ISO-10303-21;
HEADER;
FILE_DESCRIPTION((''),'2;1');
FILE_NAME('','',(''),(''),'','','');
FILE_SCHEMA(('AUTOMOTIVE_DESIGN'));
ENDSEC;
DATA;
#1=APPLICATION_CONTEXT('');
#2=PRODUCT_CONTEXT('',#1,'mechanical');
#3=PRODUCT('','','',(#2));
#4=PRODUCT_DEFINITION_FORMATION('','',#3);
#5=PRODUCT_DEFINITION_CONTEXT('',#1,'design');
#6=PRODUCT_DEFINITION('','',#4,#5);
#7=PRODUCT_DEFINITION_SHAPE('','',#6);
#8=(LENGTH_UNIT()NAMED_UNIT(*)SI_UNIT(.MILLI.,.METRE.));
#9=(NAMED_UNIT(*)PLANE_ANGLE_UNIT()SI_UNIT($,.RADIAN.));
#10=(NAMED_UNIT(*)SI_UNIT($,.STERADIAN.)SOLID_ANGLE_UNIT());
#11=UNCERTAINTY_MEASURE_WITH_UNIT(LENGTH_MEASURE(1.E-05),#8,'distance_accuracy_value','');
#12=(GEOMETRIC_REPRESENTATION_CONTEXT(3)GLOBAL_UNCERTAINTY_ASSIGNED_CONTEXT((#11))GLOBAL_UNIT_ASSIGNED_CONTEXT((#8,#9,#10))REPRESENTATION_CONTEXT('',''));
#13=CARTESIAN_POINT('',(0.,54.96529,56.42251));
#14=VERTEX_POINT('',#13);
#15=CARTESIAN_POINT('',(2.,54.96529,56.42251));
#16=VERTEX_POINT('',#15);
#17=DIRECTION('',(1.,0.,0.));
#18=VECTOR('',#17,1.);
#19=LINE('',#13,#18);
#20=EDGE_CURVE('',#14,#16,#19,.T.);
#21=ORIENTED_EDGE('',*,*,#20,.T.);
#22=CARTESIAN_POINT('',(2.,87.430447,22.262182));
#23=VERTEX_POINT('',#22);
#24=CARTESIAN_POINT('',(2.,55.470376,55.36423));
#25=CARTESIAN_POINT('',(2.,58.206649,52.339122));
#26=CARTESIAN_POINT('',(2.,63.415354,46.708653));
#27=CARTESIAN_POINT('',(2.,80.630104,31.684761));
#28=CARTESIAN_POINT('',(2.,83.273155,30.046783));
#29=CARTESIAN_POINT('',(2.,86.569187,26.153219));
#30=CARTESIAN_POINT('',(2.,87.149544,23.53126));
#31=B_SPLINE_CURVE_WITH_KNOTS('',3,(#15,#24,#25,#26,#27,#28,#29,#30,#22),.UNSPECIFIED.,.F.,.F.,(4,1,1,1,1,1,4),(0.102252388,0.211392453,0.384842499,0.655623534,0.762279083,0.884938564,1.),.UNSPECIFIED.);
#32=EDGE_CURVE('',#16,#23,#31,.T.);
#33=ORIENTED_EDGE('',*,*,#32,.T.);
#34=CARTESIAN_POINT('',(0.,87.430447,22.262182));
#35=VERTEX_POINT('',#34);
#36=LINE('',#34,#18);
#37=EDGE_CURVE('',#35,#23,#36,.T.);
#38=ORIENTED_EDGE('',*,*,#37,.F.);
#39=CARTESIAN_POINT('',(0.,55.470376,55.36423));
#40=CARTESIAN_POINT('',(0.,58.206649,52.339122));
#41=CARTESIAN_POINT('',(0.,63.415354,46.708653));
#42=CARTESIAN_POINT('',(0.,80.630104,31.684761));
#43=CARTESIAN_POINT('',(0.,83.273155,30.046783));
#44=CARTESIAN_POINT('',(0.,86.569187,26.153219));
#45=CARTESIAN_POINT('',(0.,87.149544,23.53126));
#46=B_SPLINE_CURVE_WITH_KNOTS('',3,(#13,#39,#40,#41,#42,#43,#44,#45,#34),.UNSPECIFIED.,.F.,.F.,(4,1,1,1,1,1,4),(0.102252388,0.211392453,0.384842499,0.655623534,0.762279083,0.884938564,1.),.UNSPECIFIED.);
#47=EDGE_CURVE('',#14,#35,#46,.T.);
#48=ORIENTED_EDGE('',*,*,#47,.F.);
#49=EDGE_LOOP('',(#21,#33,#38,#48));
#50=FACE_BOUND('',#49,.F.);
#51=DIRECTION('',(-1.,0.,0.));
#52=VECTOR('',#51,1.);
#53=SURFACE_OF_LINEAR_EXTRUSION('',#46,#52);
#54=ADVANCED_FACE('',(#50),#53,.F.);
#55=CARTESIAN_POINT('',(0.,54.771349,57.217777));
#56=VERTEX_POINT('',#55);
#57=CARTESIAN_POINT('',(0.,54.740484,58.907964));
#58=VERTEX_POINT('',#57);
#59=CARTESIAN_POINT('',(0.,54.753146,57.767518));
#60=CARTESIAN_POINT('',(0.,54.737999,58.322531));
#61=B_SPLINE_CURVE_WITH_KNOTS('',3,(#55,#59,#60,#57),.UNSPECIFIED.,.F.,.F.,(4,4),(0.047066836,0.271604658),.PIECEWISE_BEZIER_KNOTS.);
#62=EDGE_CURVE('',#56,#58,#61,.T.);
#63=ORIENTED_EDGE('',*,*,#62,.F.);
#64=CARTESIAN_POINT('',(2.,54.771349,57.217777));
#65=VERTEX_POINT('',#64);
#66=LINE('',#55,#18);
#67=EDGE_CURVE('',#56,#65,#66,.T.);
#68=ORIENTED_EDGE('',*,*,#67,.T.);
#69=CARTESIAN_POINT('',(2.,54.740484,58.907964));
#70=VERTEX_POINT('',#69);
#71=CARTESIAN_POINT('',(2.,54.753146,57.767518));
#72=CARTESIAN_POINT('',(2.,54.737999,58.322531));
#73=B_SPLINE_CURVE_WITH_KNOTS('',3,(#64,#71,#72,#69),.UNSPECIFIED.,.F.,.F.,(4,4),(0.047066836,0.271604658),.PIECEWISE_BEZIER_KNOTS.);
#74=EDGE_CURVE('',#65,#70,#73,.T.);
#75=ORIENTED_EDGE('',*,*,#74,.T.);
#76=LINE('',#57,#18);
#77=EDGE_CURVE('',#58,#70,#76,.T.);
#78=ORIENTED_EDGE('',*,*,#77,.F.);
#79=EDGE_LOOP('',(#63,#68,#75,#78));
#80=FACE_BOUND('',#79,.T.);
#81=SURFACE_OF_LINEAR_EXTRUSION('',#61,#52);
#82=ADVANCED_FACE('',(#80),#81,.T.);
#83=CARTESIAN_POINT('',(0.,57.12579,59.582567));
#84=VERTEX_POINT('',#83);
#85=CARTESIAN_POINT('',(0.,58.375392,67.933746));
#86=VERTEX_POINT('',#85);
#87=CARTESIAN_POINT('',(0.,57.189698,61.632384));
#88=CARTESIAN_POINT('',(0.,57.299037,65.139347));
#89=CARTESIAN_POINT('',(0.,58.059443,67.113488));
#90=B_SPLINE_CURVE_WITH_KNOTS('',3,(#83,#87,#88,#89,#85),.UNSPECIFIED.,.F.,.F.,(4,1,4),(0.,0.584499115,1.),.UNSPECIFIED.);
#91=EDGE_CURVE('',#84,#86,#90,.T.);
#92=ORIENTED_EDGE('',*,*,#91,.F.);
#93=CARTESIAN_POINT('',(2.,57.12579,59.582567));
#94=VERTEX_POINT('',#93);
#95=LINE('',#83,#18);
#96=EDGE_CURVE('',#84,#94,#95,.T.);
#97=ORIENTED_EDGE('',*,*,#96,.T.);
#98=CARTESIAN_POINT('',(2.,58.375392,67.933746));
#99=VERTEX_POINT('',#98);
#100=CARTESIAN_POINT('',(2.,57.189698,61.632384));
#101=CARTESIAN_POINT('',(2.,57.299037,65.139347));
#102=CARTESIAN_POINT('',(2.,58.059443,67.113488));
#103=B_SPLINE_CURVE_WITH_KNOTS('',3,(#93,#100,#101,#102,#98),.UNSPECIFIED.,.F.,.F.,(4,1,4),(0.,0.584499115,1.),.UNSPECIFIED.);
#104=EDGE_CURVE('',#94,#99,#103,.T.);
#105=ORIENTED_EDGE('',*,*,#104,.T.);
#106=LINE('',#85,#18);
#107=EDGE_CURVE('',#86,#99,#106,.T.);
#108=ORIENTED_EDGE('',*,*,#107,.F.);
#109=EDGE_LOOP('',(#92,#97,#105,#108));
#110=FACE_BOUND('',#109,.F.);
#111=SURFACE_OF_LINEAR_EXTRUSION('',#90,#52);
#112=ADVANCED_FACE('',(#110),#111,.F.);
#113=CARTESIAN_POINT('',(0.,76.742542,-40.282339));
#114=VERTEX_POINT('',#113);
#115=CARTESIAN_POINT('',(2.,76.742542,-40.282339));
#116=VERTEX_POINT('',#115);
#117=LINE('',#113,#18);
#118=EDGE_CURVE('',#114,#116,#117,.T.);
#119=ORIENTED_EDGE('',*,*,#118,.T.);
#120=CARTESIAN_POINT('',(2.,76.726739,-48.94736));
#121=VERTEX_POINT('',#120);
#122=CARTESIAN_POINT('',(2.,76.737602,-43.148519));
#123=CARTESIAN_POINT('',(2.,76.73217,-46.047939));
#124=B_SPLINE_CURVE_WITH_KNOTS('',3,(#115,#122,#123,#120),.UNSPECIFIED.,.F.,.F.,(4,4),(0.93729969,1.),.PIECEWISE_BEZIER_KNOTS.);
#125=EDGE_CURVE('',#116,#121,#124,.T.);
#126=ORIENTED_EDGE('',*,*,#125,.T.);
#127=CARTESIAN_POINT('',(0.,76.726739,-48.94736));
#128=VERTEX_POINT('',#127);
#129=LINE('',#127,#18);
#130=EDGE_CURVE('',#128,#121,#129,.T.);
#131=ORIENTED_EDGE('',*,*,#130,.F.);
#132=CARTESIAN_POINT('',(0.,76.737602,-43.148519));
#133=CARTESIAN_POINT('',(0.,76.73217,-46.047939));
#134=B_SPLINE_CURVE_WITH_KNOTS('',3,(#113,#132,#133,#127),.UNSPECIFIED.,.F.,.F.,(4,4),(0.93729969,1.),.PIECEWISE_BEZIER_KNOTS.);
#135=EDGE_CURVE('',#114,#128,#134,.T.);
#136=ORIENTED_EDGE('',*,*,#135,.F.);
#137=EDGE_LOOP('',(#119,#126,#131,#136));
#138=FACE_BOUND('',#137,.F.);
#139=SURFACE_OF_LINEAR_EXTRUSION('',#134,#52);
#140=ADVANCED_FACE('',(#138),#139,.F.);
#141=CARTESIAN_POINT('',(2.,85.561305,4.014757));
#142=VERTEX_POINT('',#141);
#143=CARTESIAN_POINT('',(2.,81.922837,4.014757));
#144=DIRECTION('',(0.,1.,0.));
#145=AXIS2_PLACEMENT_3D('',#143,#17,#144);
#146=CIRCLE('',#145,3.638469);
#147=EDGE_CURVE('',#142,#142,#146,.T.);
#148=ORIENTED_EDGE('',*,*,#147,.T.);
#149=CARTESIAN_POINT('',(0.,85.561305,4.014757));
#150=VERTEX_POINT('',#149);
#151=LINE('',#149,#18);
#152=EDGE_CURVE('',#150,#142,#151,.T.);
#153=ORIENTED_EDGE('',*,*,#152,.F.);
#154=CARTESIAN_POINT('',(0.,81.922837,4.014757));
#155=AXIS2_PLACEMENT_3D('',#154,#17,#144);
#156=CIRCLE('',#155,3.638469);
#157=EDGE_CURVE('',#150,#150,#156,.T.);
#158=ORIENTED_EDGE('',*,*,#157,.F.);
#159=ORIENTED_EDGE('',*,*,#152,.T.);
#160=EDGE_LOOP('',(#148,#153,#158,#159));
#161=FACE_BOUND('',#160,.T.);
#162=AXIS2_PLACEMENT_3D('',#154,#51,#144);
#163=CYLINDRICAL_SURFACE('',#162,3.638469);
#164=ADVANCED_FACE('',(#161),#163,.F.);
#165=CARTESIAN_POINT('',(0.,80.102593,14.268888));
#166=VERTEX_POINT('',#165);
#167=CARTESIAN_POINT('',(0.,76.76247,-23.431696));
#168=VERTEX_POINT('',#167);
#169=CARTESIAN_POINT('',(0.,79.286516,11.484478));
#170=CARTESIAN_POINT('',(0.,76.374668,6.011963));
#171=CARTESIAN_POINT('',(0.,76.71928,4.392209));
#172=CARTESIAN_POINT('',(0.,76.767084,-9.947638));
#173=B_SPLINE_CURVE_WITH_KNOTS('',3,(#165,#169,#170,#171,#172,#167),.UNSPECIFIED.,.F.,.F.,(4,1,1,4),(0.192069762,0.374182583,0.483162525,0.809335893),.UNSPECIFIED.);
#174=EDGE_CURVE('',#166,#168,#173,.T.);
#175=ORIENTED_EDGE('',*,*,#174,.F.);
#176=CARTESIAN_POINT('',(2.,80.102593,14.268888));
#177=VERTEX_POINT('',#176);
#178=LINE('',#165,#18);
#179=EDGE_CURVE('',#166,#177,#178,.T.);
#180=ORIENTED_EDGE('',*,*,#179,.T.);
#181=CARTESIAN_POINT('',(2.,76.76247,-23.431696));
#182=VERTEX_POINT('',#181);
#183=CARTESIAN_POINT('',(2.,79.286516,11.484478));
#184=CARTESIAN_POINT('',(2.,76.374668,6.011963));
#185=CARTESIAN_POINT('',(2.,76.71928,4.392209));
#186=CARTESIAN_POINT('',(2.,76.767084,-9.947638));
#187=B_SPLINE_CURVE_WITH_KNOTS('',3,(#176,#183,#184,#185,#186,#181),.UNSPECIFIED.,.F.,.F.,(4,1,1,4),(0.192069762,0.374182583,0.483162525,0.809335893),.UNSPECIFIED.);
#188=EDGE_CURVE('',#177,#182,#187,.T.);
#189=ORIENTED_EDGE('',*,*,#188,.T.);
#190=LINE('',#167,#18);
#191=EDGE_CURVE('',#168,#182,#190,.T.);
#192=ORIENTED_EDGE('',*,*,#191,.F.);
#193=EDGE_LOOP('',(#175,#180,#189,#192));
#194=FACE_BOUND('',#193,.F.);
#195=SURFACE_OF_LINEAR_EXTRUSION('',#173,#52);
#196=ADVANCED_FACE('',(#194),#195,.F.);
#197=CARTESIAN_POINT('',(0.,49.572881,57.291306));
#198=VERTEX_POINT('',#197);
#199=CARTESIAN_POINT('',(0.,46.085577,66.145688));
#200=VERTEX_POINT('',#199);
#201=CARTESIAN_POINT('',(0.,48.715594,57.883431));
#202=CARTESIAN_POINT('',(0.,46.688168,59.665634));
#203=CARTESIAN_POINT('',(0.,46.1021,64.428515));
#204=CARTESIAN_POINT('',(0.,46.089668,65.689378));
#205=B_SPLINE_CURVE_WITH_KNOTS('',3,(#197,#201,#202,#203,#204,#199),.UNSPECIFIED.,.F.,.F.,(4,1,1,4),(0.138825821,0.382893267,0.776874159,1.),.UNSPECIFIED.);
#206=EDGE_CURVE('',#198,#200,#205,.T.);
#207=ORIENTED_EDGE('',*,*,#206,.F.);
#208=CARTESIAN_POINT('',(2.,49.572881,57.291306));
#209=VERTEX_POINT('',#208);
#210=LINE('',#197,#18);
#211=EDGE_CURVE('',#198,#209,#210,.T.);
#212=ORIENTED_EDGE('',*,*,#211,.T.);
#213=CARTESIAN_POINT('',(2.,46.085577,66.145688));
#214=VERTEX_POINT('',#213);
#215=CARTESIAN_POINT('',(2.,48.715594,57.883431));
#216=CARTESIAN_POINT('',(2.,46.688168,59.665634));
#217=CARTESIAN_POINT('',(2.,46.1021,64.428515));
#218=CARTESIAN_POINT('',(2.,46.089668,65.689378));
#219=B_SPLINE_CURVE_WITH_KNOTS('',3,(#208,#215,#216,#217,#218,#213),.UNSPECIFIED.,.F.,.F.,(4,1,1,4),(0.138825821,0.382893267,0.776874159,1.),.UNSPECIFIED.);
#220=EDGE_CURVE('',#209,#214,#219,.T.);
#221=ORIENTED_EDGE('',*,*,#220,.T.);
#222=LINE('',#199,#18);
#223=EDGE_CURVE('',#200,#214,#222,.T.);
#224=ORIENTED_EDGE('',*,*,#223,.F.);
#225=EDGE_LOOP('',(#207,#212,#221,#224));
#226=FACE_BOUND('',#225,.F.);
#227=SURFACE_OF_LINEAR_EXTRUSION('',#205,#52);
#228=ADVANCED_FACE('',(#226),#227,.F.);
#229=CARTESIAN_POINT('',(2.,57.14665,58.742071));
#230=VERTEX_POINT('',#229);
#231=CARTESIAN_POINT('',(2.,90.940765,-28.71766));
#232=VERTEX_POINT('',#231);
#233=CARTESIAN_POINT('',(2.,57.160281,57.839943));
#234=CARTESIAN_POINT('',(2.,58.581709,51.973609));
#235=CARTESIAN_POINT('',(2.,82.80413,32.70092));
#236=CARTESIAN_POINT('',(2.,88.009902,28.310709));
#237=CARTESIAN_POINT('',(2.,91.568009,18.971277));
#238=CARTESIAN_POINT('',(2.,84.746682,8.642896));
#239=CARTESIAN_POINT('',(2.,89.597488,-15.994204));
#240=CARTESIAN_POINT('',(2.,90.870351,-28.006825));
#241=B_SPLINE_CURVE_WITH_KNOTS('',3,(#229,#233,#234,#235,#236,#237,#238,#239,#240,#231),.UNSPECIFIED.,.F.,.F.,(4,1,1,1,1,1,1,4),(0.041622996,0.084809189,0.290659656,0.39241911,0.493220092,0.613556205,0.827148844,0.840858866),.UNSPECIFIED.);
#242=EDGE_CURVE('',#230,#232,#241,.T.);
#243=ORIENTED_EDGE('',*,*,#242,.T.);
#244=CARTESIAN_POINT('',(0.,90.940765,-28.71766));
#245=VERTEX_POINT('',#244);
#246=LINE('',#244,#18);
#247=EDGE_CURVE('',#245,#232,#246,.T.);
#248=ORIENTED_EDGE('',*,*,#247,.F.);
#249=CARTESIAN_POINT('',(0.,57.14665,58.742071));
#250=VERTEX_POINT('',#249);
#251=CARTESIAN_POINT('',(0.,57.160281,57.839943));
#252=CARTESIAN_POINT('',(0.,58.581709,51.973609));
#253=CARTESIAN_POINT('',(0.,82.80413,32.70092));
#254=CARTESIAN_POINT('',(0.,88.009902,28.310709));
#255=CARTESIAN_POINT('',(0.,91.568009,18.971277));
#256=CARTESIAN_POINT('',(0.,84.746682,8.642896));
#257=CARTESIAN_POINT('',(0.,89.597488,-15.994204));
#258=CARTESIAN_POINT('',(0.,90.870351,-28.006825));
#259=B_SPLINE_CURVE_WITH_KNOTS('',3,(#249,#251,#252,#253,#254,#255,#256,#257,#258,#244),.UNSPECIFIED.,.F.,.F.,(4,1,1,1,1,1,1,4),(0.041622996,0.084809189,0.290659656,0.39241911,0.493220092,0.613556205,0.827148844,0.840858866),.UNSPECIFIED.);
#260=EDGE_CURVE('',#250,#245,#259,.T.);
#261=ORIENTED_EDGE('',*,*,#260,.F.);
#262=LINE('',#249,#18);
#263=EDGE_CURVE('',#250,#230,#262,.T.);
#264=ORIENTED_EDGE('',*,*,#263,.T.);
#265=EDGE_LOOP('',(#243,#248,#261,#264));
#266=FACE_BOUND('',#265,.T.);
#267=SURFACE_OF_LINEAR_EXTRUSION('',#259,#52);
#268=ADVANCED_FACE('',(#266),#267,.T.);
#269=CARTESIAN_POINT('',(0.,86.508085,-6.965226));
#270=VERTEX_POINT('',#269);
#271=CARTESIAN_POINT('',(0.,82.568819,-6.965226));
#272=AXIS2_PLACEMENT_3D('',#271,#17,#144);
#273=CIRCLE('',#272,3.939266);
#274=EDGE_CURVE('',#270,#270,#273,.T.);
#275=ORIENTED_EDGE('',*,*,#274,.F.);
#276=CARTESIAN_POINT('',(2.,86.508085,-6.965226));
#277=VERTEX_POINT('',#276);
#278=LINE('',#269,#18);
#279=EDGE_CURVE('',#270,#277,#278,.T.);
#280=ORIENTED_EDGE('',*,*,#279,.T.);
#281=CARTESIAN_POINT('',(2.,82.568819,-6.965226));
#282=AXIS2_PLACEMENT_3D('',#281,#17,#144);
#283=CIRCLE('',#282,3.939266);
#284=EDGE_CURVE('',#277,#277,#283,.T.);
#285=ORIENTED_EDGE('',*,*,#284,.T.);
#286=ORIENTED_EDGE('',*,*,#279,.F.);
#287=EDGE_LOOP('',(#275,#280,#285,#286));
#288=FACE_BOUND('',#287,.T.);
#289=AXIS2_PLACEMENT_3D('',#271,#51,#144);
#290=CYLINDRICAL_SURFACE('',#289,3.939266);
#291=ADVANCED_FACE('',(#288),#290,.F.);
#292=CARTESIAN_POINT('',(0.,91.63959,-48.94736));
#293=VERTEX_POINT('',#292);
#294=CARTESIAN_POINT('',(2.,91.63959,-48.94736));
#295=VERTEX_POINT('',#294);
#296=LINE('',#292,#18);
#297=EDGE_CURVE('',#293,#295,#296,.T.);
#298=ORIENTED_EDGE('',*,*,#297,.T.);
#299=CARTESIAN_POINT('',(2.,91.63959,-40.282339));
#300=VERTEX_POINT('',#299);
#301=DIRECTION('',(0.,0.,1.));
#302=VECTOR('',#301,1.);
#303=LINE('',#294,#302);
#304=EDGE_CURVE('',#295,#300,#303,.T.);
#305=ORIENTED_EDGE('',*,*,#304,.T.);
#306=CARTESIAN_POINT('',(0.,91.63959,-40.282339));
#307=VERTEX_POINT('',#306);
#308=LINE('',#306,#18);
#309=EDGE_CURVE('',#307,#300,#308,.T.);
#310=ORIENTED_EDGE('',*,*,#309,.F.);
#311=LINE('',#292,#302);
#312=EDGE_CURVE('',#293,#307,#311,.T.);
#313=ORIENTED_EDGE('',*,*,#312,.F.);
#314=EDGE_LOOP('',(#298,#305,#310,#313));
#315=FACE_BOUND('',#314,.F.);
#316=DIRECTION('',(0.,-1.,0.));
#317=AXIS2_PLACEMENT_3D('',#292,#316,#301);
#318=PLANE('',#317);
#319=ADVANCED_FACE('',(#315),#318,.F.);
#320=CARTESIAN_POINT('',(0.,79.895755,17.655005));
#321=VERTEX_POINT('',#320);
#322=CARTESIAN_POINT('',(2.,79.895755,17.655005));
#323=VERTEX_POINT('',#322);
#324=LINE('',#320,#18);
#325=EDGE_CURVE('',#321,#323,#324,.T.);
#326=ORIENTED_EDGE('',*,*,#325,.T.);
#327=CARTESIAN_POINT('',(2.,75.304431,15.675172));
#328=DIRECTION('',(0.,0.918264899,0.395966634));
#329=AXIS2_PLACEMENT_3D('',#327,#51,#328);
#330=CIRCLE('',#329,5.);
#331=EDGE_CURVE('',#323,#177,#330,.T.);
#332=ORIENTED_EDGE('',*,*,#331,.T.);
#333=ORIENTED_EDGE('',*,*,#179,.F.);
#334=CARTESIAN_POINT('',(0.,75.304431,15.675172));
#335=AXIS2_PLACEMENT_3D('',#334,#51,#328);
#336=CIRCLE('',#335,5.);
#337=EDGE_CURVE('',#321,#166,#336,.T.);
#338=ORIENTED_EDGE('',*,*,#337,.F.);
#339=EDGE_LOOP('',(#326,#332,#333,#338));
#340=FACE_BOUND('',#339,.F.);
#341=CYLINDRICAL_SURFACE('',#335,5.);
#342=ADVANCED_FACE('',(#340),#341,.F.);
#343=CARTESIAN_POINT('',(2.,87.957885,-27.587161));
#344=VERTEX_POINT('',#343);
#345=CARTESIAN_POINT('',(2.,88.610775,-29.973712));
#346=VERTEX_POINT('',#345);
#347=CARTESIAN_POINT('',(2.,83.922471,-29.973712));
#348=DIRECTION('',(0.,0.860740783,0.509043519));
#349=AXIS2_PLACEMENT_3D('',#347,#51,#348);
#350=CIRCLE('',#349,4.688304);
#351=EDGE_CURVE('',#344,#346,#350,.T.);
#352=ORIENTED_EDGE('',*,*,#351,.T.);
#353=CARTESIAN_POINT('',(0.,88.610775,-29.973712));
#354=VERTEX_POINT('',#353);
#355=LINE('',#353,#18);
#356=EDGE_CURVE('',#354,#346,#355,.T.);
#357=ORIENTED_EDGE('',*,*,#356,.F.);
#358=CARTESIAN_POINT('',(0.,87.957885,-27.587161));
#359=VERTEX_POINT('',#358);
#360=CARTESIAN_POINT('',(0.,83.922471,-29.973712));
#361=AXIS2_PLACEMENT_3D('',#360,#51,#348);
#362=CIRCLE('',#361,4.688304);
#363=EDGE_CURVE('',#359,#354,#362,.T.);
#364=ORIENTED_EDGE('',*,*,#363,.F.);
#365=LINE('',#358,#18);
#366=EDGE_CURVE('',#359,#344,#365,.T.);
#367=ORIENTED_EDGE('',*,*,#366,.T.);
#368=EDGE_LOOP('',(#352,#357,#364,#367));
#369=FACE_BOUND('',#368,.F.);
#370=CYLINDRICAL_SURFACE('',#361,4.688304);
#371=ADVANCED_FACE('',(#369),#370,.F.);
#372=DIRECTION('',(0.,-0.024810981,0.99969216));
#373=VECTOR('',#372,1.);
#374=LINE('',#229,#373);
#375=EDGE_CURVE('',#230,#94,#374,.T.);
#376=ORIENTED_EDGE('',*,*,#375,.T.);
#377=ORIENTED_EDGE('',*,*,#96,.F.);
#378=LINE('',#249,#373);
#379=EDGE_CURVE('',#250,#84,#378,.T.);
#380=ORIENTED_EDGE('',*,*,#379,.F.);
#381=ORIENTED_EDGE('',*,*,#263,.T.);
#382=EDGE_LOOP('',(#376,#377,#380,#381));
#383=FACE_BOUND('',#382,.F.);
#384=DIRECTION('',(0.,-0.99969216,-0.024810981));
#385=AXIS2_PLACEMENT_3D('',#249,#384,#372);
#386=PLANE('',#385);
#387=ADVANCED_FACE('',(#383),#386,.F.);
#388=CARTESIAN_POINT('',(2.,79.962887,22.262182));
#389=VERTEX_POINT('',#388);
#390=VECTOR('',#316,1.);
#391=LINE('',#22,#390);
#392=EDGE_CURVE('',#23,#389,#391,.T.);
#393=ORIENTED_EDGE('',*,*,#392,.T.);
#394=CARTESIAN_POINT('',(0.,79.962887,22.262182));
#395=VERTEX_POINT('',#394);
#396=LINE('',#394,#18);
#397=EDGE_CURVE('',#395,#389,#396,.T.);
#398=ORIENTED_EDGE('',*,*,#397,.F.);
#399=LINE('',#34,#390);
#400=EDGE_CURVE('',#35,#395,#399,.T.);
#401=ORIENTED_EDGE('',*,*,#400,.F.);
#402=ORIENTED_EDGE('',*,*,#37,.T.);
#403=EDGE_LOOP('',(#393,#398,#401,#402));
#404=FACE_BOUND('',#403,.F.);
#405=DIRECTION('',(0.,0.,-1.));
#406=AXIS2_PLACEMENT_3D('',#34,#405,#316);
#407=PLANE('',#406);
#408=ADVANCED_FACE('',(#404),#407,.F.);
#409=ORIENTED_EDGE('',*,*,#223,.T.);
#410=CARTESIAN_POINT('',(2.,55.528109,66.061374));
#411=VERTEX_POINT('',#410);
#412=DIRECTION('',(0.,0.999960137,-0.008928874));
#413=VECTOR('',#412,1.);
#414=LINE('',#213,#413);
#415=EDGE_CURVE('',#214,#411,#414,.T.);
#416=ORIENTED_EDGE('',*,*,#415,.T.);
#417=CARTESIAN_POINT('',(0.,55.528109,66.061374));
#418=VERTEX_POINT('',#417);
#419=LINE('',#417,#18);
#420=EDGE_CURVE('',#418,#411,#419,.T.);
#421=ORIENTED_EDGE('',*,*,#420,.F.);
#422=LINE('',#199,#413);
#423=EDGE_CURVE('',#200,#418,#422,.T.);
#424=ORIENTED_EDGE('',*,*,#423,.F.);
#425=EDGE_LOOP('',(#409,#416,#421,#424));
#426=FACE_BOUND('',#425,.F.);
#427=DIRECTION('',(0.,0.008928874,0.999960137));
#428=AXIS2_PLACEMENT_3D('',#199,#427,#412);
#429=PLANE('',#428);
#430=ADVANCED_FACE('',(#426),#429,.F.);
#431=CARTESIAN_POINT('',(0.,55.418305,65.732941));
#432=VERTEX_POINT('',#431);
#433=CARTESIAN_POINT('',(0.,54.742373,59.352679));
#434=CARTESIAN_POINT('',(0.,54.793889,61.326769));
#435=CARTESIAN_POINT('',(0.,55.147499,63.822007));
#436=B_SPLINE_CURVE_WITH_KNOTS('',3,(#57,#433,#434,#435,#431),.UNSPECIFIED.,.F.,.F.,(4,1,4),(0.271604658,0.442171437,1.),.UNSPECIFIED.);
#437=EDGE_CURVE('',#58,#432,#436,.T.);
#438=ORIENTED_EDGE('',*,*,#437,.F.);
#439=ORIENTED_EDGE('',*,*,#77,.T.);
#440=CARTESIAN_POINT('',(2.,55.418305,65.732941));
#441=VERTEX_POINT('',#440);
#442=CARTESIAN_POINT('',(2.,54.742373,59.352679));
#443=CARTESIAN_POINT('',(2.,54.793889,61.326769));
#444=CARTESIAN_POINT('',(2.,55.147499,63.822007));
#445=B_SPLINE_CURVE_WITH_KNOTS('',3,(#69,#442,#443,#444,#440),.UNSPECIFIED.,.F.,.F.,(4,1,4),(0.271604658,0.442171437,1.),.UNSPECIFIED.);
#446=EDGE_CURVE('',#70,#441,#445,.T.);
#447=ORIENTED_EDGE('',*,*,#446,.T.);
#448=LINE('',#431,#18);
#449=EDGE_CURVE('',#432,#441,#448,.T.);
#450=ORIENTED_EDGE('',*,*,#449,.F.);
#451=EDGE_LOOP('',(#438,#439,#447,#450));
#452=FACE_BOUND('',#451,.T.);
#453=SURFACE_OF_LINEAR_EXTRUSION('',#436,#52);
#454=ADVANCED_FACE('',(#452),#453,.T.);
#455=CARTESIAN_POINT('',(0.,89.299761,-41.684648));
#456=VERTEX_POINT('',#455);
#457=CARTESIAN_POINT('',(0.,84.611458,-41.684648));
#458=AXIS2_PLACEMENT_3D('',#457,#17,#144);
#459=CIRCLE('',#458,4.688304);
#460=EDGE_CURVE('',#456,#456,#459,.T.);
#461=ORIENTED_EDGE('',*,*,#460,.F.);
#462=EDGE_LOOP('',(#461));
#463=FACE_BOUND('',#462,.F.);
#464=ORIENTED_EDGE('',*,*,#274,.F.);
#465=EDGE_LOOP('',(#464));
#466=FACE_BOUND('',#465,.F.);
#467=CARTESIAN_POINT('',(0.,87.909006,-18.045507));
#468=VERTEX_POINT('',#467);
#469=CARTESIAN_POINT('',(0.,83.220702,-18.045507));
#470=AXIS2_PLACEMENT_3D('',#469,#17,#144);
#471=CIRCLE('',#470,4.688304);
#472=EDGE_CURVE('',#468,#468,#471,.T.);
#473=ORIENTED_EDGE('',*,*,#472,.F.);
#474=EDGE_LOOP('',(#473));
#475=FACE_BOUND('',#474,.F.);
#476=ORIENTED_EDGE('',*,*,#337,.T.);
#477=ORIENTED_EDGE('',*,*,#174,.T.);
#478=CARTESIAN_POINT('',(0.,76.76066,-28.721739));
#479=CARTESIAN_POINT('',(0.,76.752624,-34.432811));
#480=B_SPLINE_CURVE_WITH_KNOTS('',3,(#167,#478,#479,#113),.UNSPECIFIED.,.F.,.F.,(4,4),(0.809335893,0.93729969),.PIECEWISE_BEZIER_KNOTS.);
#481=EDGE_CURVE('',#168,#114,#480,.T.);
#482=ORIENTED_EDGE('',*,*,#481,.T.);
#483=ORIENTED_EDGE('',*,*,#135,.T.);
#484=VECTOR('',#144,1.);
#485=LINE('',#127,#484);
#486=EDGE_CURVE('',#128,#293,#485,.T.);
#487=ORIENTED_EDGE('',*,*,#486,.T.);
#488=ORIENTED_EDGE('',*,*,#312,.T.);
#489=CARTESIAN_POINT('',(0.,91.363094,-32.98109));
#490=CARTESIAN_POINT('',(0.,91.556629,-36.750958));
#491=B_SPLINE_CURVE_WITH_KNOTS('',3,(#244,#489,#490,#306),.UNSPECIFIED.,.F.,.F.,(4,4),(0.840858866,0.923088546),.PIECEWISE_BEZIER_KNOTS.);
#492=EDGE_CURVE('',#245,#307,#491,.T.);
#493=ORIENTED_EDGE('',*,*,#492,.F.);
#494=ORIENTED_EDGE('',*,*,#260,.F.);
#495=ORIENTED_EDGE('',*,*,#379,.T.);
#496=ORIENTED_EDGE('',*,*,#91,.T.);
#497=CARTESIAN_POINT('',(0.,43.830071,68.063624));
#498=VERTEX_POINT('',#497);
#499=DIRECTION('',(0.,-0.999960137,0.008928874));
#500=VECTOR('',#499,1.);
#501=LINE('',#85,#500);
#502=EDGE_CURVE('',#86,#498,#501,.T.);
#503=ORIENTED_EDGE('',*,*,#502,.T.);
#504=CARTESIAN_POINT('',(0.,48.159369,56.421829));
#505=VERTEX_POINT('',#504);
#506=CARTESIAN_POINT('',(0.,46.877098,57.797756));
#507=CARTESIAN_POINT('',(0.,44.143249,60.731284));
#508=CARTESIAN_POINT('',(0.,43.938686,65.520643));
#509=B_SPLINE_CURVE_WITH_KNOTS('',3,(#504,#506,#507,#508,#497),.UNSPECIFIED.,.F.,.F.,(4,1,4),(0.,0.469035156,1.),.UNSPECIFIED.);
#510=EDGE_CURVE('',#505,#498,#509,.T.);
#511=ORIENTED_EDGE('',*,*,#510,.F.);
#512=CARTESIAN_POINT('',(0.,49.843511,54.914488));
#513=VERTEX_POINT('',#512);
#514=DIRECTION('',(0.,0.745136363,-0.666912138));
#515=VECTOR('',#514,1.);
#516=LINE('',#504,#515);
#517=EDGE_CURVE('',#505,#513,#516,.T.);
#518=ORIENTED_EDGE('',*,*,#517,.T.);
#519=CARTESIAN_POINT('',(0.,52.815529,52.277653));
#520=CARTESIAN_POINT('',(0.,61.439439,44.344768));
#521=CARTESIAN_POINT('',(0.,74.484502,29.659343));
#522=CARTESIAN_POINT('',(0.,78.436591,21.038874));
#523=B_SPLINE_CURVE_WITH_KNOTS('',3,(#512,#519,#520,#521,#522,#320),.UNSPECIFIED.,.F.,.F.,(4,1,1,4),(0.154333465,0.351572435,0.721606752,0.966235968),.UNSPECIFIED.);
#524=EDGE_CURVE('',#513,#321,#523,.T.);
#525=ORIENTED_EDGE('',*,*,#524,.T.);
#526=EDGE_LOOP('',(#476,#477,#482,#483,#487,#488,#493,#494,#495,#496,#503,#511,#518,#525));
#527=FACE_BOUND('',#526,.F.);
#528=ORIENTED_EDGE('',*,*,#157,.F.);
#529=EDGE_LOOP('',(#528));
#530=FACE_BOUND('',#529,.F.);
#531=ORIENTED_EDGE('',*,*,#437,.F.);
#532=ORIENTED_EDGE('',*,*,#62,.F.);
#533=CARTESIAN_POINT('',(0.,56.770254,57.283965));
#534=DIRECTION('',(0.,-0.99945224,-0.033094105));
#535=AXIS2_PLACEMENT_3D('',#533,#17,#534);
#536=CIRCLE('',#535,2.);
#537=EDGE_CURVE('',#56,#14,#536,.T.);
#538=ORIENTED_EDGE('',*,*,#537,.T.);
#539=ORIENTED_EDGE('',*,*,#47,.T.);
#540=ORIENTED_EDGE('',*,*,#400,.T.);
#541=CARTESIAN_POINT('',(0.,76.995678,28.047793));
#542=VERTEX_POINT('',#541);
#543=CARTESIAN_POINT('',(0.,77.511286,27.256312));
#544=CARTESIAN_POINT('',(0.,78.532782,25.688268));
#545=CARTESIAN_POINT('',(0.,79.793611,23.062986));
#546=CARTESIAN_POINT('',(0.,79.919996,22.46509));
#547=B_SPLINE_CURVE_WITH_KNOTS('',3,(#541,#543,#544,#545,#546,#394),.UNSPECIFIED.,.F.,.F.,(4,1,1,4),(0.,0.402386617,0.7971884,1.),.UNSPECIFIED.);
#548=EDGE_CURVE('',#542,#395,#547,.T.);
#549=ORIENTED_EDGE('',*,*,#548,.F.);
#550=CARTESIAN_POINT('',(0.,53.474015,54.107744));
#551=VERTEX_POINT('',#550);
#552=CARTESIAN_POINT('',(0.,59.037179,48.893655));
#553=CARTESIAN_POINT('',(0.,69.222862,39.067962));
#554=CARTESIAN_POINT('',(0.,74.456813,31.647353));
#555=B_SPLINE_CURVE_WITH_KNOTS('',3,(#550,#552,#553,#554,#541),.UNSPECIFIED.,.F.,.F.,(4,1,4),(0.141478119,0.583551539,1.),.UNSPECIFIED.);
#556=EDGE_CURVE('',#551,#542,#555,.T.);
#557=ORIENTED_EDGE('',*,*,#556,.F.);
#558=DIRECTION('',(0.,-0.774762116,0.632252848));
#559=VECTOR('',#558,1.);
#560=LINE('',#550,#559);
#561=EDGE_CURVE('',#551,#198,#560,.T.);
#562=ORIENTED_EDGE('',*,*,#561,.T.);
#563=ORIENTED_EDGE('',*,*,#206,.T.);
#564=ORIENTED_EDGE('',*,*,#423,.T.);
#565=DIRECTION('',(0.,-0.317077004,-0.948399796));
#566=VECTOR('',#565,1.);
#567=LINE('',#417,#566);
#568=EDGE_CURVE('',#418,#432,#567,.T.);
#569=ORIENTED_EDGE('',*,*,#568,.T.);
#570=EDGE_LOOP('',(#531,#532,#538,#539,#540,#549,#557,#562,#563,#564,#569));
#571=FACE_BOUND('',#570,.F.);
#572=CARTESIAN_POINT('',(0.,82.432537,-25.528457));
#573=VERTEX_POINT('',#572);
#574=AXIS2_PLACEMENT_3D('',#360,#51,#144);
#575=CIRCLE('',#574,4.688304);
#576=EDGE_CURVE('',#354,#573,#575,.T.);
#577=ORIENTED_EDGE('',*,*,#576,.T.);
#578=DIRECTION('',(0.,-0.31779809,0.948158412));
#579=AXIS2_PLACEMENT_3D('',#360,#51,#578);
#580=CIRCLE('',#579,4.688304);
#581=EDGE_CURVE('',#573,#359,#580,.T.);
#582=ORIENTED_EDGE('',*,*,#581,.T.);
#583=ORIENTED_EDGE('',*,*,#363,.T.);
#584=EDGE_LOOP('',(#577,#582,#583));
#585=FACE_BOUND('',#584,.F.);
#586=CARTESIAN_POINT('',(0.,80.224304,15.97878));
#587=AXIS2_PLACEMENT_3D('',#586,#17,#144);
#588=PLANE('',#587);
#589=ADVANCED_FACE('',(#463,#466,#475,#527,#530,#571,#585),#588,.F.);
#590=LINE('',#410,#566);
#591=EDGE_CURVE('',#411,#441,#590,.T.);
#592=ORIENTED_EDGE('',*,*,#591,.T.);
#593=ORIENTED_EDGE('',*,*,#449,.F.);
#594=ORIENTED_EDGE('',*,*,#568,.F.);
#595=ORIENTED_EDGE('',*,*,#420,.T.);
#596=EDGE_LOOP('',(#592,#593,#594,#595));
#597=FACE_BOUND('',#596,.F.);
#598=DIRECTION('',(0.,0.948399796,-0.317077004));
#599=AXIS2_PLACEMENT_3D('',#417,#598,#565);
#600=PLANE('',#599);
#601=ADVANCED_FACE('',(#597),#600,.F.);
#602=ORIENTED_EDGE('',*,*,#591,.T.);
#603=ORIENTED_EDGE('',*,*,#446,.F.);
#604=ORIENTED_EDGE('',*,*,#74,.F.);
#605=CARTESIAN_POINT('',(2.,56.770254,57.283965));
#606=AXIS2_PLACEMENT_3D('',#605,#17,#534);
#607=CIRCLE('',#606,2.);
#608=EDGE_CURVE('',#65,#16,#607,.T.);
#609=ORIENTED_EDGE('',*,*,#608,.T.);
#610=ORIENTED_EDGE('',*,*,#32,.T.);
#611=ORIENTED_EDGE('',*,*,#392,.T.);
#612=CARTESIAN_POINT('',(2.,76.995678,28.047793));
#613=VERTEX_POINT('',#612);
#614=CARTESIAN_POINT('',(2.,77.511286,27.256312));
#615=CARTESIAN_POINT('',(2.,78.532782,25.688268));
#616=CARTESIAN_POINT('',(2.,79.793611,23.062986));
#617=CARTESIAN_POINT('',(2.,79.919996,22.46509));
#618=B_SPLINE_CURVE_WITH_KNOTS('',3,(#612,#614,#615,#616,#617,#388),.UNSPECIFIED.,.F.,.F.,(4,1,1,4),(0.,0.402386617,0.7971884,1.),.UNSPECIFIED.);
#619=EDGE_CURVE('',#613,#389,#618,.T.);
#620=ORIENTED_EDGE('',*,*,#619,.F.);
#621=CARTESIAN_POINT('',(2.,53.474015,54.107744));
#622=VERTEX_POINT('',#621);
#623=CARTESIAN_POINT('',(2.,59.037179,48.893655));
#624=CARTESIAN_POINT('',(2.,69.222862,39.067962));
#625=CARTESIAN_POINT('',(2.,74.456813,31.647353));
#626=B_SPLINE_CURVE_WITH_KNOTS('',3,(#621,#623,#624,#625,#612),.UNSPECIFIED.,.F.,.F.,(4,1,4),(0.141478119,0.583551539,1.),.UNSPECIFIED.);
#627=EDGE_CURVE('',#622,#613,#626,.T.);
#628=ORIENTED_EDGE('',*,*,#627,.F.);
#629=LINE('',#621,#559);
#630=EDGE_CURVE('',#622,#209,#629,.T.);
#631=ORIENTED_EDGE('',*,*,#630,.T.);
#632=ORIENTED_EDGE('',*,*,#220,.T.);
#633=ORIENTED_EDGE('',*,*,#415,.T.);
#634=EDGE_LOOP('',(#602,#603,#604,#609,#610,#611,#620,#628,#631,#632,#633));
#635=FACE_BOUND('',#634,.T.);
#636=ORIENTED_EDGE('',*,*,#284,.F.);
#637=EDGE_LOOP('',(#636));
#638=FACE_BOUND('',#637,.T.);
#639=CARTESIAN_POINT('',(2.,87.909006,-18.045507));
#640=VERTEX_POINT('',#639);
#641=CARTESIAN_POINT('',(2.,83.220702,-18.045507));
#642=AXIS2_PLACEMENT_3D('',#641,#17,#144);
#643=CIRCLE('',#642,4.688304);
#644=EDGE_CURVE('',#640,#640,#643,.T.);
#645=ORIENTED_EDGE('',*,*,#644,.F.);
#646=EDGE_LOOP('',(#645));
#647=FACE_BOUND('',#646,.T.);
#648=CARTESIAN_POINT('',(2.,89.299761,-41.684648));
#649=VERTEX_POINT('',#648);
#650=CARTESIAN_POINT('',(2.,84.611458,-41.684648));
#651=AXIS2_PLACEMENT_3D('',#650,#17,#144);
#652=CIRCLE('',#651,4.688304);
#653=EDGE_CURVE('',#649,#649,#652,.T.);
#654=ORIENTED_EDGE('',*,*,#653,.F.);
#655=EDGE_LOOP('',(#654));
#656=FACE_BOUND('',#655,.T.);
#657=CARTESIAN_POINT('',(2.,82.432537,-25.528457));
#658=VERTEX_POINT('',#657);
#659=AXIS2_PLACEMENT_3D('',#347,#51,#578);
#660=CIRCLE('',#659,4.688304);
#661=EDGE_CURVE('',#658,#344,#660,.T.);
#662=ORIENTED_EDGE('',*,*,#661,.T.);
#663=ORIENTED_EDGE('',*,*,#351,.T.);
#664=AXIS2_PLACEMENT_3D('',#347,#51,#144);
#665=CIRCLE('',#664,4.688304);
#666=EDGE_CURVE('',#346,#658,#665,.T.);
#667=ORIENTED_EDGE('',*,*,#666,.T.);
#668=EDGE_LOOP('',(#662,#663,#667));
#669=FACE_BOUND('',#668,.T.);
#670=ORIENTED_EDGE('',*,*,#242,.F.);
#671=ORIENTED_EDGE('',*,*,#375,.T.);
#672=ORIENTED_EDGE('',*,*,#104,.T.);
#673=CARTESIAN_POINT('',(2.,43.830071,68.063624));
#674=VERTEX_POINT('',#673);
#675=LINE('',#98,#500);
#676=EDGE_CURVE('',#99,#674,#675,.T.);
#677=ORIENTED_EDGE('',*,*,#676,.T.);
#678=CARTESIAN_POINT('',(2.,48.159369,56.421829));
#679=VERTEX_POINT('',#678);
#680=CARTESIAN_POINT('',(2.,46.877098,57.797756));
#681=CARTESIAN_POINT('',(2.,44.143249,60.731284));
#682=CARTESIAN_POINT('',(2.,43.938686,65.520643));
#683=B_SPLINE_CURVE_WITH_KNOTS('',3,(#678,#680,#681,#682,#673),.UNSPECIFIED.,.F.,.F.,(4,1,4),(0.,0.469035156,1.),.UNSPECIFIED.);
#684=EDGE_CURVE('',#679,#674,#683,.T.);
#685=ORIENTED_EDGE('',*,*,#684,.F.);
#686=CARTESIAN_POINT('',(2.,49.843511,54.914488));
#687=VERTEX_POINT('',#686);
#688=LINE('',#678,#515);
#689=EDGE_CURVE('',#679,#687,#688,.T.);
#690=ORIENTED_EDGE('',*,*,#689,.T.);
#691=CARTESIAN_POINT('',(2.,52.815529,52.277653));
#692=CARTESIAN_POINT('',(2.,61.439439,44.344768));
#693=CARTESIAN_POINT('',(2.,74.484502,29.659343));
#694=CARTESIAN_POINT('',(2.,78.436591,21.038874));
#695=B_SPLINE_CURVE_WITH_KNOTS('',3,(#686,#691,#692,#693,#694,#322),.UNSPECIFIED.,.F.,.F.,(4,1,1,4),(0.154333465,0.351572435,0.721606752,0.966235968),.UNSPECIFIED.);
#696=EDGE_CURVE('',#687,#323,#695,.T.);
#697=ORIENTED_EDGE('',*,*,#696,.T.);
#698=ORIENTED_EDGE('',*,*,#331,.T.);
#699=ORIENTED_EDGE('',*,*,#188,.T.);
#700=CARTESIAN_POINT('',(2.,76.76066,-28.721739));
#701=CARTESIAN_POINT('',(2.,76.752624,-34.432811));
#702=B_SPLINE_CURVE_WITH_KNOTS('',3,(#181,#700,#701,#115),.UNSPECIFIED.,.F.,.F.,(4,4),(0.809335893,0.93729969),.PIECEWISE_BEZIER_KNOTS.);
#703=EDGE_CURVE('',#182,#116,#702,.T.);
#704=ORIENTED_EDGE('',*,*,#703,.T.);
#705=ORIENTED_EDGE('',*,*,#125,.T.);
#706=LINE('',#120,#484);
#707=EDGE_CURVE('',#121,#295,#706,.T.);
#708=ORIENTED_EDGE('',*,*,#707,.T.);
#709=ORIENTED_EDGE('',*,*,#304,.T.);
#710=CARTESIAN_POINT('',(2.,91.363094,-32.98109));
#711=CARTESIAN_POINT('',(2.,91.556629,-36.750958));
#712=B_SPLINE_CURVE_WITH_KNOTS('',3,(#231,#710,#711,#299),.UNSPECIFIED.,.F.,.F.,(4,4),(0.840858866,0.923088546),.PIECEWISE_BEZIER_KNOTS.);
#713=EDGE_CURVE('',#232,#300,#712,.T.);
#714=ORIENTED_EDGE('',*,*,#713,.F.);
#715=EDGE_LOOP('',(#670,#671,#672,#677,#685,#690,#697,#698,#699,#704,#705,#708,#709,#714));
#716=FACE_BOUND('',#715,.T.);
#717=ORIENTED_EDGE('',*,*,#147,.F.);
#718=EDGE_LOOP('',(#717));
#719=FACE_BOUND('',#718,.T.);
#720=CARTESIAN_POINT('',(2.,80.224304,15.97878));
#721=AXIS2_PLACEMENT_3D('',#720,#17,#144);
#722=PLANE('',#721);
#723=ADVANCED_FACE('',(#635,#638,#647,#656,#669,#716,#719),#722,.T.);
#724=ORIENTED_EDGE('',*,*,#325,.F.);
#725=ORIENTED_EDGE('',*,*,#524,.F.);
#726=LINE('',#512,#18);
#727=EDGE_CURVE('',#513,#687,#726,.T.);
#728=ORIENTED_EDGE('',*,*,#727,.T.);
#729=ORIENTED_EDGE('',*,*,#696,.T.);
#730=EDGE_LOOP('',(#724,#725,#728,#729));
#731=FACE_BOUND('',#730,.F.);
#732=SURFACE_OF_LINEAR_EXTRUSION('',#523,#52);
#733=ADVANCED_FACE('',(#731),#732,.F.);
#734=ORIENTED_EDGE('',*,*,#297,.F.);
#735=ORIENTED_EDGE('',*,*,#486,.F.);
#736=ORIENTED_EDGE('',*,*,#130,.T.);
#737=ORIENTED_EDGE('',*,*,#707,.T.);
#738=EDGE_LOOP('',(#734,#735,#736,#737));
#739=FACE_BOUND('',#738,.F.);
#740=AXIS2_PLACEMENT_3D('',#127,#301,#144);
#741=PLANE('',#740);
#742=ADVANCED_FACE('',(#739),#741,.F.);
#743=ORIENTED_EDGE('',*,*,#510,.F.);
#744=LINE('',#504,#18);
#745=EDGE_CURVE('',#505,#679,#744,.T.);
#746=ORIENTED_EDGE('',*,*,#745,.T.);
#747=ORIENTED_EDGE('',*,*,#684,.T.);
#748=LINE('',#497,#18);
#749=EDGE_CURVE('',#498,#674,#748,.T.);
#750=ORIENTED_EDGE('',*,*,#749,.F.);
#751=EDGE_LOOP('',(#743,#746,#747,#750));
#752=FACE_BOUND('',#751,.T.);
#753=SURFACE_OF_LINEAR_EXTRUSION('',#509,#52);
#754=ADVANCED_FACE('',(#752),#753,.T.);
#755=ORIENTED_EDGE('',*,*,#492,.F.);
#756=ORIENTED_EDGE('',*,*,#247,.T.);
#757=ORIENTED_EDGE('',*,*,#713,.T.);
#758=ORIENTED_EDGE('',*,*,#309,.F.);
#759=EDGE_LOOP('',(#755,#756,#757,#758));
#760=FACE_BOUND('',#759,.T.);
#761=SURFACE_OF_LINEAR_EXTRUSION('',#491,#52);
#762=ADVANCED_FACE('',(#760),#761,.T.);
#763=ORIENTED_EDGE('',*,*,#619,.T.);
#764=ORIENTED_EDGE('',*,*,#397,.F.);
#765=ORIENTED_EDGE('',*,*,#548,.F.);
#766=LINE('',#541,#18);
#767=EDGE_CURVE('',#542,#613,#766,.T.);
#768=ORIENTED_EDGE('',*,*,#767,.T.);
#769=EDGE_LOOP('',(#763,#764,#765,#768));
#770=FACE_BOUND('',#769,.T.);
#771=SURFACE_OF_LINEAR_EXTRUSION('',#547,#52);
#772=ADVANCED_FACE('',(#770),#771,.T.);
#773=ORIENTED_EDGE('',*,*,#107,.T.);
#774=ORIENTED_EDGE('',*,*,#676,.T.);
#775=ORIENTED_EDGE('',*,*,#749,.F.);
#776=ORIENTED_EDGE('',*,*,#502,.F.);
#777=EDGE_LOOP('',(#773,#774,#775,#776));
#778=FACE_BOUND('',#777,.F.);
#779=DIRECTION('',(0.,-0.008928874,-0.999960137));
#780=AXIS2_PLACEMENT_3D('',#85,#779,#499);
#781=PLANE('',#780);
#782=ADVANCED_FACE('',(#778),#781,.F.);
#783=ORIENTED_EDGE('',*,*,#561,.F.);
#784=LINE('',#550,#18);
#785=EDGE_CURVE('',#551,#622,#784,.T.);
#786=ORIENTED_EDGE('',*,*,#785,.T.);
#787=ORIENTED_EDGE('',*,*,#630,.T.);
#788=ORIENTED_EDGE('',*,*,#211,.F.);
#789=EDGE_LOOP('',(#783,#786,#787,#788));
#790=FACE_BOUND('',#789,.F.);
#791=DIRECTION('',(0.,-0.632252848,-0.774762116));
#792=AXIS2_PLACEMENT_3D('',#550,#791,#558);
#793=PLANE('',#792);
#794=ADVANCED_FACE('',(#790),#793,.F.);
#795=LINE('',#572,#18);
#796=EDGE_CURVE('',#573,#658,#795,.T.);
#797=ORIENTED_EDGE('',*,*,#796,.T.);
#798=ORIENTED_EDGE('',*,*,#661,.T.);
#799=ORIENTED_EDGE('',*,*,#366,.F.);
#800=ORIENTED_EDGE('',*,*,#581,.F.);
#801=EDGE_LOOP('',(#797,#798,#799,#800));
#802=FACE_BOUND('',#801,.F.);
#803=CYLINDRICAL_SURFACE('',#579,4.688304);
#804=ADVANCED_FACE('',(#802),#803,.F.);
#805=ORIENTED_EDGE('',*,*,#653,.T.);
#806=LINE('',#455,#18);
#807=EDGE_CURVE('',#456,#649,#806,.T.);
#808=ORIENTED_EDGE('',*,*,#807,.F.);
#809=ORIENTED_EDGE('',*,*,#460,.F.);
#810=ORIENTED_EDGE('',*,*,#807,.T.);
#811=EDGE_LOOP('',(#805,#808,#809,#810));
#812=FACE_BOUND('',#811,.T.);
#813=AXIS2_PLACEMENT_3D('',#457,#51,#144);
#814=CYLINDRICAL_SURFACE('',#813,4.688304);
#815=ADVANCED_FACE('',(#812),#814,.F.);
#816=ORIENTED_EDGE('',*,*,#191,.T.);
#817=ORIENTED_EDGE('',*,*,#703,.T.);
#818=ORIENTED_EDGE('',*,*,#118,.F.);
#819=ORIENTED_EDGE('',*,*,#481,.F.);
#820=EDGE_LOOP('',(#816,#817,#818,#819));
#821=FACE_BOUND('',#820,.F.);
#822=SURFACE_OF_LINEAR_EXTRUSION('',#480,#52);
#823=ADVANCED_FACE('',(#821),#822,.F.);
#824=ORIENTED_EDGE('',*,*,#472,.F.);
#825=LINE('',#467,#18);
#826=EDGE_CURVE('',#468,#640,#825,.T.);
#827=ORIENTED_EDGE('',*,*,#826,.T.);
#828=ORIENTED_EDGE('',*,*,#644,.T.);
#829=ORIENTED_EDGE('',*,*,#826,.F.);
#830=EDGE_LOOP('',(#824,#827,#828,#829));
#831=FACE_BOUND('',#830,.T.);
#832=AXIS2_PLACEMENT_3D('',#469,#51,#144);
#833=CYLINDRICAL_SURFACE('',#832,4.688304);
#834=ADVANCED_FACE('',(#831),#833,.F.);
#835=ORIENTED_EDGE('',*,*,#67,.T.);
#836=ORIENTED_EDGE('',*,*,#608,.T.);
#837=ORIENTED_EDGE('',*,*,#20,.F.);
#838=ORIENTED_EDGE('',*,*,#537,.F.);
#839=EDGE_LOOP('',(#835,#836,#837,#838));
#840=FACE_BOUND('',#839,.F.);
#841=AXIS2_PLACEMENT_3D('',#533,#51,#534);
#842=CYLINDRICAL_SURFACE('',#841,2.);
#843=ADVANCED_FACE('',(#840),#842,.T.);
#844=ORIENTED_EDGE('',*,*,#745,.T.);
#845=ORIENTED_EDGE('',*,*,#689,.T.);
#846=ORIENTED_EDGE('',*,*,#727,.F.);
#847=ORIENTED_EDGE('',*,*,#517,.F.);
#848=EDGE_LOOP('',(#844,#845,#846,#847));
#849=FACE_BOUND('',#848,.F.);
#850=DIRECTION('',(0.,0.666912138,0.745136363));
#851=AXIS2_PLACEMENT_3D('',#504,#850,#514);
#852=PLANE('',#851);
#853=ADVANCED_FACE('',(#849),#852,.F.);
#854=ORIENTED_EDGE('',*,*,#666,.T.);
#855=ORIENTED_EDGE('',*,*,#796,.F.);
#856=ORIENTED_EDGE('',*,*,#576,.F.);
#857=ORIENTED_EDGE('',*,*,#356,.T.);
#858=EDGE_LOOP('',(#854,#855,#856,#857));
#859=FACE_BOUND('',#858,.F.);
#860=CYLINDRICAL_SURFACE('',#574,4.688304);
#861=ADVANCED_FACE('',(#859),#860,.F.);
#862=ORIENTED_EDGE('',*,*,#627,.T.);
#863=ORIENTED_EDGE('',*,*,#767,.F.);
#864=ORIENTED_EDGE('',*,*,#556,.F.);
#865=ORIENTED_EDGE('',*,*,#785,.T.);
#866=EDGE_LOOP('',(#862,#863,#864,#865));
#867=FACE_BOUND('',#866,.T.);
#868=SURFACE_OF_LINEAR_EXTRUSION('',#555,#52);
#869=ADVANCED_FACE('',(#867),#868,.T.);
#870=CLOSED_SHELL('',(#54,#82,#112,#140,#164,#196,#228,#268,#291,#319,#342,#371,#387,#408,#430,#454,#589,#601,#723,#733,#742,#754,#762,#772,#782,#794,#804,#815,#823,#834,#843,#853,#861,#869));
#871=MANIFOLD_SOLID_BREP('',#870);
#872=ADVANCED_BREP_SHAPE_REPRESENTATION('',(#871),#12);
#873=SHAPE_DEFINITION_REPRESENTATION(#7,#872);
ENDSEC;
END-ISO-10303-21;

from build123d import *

# Parameters (mm, degrees)
F0_R     = 4.6883037194
F0_R_2   = 3.9392661415
F0_R_3   = 3.6384688305
F1_DEPTH = 2


with BuildPart() as f1:
    # F0 (on Right) → F1 (new body)
    with BuildSketch(Plane.YZ):
        with BuildLine():
            ThreePointArc((79.8957550101, 17.6550047898), (80.2951283262, 15.98002463), (80.1025933871, 14.268888201))
            add(Edge.make_bspline(
                [(80.4956108332, 16.2556357682), (80.4570591964, 15.6645429926), (80.3133675624, 14.9880382733), (80.1025933871, 14.268888201)],
                knots=[0.1450341549, 0.1450341549, 0.1450341549, 0.1450341549, 0.1920697624, 0.1920697624, 0.1920697624, 0.1920697624], degree=3))
            add(Edge.make_bspline(
                [(79.8957550101, 17.6550047898), (80.0971506674, 17.1879589655), (80.2963799136, 16.7218081376), (80.4956108332, 16.2556357682)],
                knots=[0.9662359683, 0.9662359683, 0.9662359683, 0.9662359683, 1, 1, 1, 1], degree=3))
        make_face()
        with BuildLine():
            add(Edge.make_bspline(
                [(80.1025933871, 14.268888201), (79.2865163427, 11.4844775171), (76.3746678901, 6.0119629795), (76.7192801107, 4.392209), (76.7670835041, -9.947638286), (76.7624697083, -23.4316956947)],
                knots=[0.1920697624, 0.1920697624, 0.1920697624, 0.1920697624, 0.3741825829, 0.4831625245, 0.8093358927, 0.8093358927, 0.8093358927, 0.8093358927], degree=3))
            add(Edge.make_bspline(
                [(76.7624697083, -23.4316956947), (78.7015422133, -24.1477778796), (80.6205636372, -24.8568445533), (82.4325372304, -25.5284571248)],
                knots=[0.0270811096, 0.0270811096, 0.0270811096, 0.0270811096, 0.1445794371, 0.1445794371, 0.1445794371, 0.1445794371], degree=3))
            ThreePointArc((82.4325372304, -25.5284571248), (85.5593685519, -25.5804488455), (87.957885412, -27.5871611128))
            add(Edge.make_bspline(
                [(87.957885412, -27.5871611128), (89.0859034651, -28.0107819184), (90.0933921461, -28.3922316739), (90.9407654034, -28.7176599349)],
                knots=[0.2751664288, 0.2751664288, 0.2751664288, 0.2751664288, 0.3655406854, 0.3655406854, 0.3655406854, 0.3655406854], degree=3))
            add(Edge.make_bspline(
                [(57.1466498224, 58.7420705596), (57.1602811091, 57.8399433674), (58.5817092979, 51.97360927), (82.8041301063, 32.7009203844), (88.0099023997, 28.3107089105), (91.5680094157, 18.9712767827), (84.7466815595, 8.6428960087), (89.5974882958, -15.9942043752), (90.8703512806, -28.0068250998), (90.9407654034, -28.7176599349)],
                knots=[0.0416229957, 0.0416229957, 0.0416229957, 0.0416229957, 0.0848091888, 0.2906596564, 0.3924191098, 0.4932200917, 0.6135562047, 0.8271488441, 0.8408588658, 0.8408588658, 0.8408588658, 0.8408588658], degree=3))
            Line((57.1466498224, 58.7420705596), (57.12578985, 59.5825674036))
            add(Edge.make_bspline(
                [(57.12578985, 59.5825674036), (57.1896981946, 61.6323841738), (57.2990368452, 65.1393471722), (58.0594427733, 67.1134882981), (58.3753921092, 67.9337456822)],
                knots=[0, 0, 0, 0, 0.5844991154, 1, 1, 1, 1], degree=3))
            Line((58.3753921092, 67.9337456822), (43.8300706446, 68.0636242032))
            add(Edge.make_bspline(
                [(48.1593688821, 56.4218290004), (46.8770978389, 57.7977564654), (44.1432493691, 60.7312838303), (43.9386863932, 65.5206429075), (43.8300706446, 68.0636242032)],
                knots=[0, 0, 0, 0, 0.4690351559, 1, 1, 1, 1], degree=3))
            Line((48.1593688821, 56.4218290004), (49.8435108373, 54.9144878378))
            add(Edge.make_bspline(
                [(49.8435108373, 54.9144878378), (52.815529184, 52.2776531088), (61.4394394987, 44.3447683348), (74.484501975, 29.6593432966), (78.4365909399, 21.0388736118), (79.8957550101, 17.6550047898)],
                knots=[0.154333465, 0.154333465, 0.154333465, 0.154333465, 0.3515724353, 0.7216067518, 0.9662359683, 0.9662359683, 0.9662359683, 0.9662359683], degree=3))
            add(Edge.make_bspline(
                [(79.8957550101, 17.6550047898), (80.0971506674, 17.1879589655), (80.2963799136, 16.7218081376), (80.4956108332, 16.2556357682)],
                knots=[0.9662359683, 0.9662359683, 0.9662359683, 0.9662359683, 1, 1, 1, 1], degree=3))
            add(Edge.make_bspline(
                [(80.4956108332, 16.2556357682), (80.4570591964, 15.6645429926), (80.3133675624, 14.9880382733), (80.1025933871, 14.268888201)],
                knots=[0.1450341549, 0.1450341549, 0.1450341549, 0.1450341549, 0.1920697624, 0.1920697624, 0.1920697624, 0.1920697624], degree=3))
        make_face()
        with Locations((83.2207022909, -18.0455071758)):
            Circle(F0_R, mode=Mode.SUBTRACT)
        with Locations((82.568819048, -6.9652261674)):
            Circle(F0_R_2, mode=Mode.SUBTRACT)
        with Locations((81.9228366017, 4.0147569962)):
            Circle(F0_R_3, mode=Mode.SUBTRACT)
        with BuildLine():
            ThreePointArc((54.7713492842, 57.2177769689), (54.8271979257, 56.810114984), (54.9652899831, 56.4225095809))
            add(Edge.make_bspline(
                [(54.9652899831, 56.4225095809), (55.4703755244, 55.3642297227), (58.2066489083, 52.3391222765), (63.4153535343, 46.7086525336), (80.6301039509, 31.6847612882), (83.2731553162, 30.0467828266), (86.5691865953, 26.1532190516), (87.1495435558, 23.5312600221), (87.43044734, 22.2621820867)],
                knots=[0.1022523883, 0.1022523883, 0.1022523883, 0.1022523883, 0.2113924531, 0.3848424985, 0.6556235338, 0.7622790828, 0.8849385641, 1, 1, 1, 1], degree=3))
            Line((87.43044734, 22.2621820867), (80.8183178306, 22.2621820867))
            Line((80.8183178306, 22.2621820867), (79.9628868699, 22.2621820867))
            add(Edge.make_bspline(
                [(76.995678246, 28.0477926135), (77.5112858693, 27.2563115148), (78.5327821075, 25.6882684365), (79.7936114735, 23.0629855626), (79.9199958873, 22.4650895896), (79.9628868699, 22.2621820867)],
                knots=[0, 0, 0, 0, 0.4023866175, 0.7971883997, 1, 1, 1, 1], degree=3))
            add(Edge.make_bspline(
                [(53.4740150752, 54.1077444553), (59.0371788567, 48.8936546263), (69.2228621791, 39.0679619057), (74.4568134712, 31.6473528485), (76.995678246, 28.0477926135)],
                knots=[0.1414781195, 0.1414781195, 0.1414781195, 0.1414781195, 0.5835515389, 1, 1, 1, 1], degree=3))
            Line((53.4740150752, 54.1077444553), (49.5728808967, 57.2913064097))
            add(Edge.make_bspline(
                [(49.5728808967, 57.2913064097), (48.7155941015, 57.8834306969), (46.6881680975, 59.6656337099), (46.102100063, 64.4285146744), (46.0896684812, 65.6893778461), (46.0855774581, 66.1456882954)],
                knots=[0.1388258208, 0.1388258208, 0.1388258208, 0.1388258208, 0.382893267, 0.7768741592, 1, 1, 1, 1], degree=3))
            Line((46.0855774581, 66.1456882954), (55.5281094919, 66.0613737549))
            Line((55.5281094919, 66.0613737549), (55.418305099, 65.7329410315))
            add(Edge.make_bspline(
                [(54.7404844243, 58.9079639922), (54.7423727181, 59.352678995), (54.7938891269, 61.3267690629), (55.1474991661, 63.8220073533), (55.418305099, 65.7329410315)],
                knots=[0.2716046575, 0.2716046575, 0.2716046575, 0.2716046575, 0.4421714365, 1, 1, 1, 1], degree=3))
            add(Edge.make_bspline(
                [(54.7713492842, 57.2177769689), (54.7531461092, 57.7675184991), (54.7379986333, 58.3225314814), (54.7404844243, 58.9079639922)],
                knots=[0.0470668364, 0.0470668364, 0.0470668364, 0.0470668364, 0.2716046575, 0.2716046575, 0.2716046575, 0.2716046575], degree=3))
        make_face(mode=Mode.SUBTRACT)
        with BuildLine():
            add(Edge.make_bspline(
                [(76.7624697083, -23.4316956947), (78.7015422133, -24.1477778796), (80.6205636372, -24.8568445533), (82.4325372304, -25.5284571248)],
                knots=[0.0270811096, 0.0270811096, 0.0270811096, 0.0270811096, 0.1445794371, 0.1445794371, 0.1445794371, 0.1445794371], degree=3))
            add(Edge.make_bspline(
                [(76.7624697083, -23.4316956947), (76.7606596316, -28.7217388563), (76.7526244709, -34.4328108048), (76.7425421777, -40.2823389925)],
                knots=[0.8093358927, 0.8093358927, 0.8093358927, 0.8093358927, 0.9372996905, 0.9372996905, 0.9372996905, 0.9372996905], degree=3))
            add(Edge.make_bspline(
                [(76.7425421777, -40.2823389925), (76.7376020078, -43.1485186013), (76.732170352, -46.0479394839), (76.7267386962, -48.9473603666)],
                knots=[0.9372996905, 0.9372996905, 0.9372996905, 0.9372996905, 1, 1, 1, 1], degree=3))
            Line((76.7267386962, -48.9473603666), (91.6395902509, -48.9473603666))
            Line((91.6395902509, -48.9473603666), (91.6395902509, -40.2823389925))
            add(Edge.make_bspline(
                [(90.9407654034, -28.7176599349), (91.3630937503, -32.981090182), (91.5566289372, -36.7509584482), (91.6395902509, -40.2823389925)],
                knots=[0.8408588658, 0.8408588658, 0.8408588658, 0.8408588658, 0.9230885456, 0.9230885456, 0.9230885456, 0.9230885456], degree=3))
            add(Edge.make_bspline(
                [(87.957885412, -27.5871611128), (89.0859034651, -28.0107819184), (90.0933921461, -28.3922316739), (90.9407654034, -28.7176599349)],
                knots=[0.2751664288, 0.2751664288, 0.2751664288, 0.2751664288, 0.3655406854, 0.3655406854, 0.3655406854, 0.3655406854], degree=3))
            ThreePointArc((87.957885412, -27.5871611128), (88.4446078172, -28.7365892089), (88.6107749153, -29.9737117344))
            ThreePointArc((88.6107749153, -29.9737117344), (81.1843213813, -33.7793296026), (82.4325372304, -25.5284571248))
        make_face()
        with Locations((84.6114576106, -41.6846479636)):
            Circle(F0_R, mode=Mode.SUBTRACT)
    extrude(amount=F1_DEPTH)


solid = f1.part
